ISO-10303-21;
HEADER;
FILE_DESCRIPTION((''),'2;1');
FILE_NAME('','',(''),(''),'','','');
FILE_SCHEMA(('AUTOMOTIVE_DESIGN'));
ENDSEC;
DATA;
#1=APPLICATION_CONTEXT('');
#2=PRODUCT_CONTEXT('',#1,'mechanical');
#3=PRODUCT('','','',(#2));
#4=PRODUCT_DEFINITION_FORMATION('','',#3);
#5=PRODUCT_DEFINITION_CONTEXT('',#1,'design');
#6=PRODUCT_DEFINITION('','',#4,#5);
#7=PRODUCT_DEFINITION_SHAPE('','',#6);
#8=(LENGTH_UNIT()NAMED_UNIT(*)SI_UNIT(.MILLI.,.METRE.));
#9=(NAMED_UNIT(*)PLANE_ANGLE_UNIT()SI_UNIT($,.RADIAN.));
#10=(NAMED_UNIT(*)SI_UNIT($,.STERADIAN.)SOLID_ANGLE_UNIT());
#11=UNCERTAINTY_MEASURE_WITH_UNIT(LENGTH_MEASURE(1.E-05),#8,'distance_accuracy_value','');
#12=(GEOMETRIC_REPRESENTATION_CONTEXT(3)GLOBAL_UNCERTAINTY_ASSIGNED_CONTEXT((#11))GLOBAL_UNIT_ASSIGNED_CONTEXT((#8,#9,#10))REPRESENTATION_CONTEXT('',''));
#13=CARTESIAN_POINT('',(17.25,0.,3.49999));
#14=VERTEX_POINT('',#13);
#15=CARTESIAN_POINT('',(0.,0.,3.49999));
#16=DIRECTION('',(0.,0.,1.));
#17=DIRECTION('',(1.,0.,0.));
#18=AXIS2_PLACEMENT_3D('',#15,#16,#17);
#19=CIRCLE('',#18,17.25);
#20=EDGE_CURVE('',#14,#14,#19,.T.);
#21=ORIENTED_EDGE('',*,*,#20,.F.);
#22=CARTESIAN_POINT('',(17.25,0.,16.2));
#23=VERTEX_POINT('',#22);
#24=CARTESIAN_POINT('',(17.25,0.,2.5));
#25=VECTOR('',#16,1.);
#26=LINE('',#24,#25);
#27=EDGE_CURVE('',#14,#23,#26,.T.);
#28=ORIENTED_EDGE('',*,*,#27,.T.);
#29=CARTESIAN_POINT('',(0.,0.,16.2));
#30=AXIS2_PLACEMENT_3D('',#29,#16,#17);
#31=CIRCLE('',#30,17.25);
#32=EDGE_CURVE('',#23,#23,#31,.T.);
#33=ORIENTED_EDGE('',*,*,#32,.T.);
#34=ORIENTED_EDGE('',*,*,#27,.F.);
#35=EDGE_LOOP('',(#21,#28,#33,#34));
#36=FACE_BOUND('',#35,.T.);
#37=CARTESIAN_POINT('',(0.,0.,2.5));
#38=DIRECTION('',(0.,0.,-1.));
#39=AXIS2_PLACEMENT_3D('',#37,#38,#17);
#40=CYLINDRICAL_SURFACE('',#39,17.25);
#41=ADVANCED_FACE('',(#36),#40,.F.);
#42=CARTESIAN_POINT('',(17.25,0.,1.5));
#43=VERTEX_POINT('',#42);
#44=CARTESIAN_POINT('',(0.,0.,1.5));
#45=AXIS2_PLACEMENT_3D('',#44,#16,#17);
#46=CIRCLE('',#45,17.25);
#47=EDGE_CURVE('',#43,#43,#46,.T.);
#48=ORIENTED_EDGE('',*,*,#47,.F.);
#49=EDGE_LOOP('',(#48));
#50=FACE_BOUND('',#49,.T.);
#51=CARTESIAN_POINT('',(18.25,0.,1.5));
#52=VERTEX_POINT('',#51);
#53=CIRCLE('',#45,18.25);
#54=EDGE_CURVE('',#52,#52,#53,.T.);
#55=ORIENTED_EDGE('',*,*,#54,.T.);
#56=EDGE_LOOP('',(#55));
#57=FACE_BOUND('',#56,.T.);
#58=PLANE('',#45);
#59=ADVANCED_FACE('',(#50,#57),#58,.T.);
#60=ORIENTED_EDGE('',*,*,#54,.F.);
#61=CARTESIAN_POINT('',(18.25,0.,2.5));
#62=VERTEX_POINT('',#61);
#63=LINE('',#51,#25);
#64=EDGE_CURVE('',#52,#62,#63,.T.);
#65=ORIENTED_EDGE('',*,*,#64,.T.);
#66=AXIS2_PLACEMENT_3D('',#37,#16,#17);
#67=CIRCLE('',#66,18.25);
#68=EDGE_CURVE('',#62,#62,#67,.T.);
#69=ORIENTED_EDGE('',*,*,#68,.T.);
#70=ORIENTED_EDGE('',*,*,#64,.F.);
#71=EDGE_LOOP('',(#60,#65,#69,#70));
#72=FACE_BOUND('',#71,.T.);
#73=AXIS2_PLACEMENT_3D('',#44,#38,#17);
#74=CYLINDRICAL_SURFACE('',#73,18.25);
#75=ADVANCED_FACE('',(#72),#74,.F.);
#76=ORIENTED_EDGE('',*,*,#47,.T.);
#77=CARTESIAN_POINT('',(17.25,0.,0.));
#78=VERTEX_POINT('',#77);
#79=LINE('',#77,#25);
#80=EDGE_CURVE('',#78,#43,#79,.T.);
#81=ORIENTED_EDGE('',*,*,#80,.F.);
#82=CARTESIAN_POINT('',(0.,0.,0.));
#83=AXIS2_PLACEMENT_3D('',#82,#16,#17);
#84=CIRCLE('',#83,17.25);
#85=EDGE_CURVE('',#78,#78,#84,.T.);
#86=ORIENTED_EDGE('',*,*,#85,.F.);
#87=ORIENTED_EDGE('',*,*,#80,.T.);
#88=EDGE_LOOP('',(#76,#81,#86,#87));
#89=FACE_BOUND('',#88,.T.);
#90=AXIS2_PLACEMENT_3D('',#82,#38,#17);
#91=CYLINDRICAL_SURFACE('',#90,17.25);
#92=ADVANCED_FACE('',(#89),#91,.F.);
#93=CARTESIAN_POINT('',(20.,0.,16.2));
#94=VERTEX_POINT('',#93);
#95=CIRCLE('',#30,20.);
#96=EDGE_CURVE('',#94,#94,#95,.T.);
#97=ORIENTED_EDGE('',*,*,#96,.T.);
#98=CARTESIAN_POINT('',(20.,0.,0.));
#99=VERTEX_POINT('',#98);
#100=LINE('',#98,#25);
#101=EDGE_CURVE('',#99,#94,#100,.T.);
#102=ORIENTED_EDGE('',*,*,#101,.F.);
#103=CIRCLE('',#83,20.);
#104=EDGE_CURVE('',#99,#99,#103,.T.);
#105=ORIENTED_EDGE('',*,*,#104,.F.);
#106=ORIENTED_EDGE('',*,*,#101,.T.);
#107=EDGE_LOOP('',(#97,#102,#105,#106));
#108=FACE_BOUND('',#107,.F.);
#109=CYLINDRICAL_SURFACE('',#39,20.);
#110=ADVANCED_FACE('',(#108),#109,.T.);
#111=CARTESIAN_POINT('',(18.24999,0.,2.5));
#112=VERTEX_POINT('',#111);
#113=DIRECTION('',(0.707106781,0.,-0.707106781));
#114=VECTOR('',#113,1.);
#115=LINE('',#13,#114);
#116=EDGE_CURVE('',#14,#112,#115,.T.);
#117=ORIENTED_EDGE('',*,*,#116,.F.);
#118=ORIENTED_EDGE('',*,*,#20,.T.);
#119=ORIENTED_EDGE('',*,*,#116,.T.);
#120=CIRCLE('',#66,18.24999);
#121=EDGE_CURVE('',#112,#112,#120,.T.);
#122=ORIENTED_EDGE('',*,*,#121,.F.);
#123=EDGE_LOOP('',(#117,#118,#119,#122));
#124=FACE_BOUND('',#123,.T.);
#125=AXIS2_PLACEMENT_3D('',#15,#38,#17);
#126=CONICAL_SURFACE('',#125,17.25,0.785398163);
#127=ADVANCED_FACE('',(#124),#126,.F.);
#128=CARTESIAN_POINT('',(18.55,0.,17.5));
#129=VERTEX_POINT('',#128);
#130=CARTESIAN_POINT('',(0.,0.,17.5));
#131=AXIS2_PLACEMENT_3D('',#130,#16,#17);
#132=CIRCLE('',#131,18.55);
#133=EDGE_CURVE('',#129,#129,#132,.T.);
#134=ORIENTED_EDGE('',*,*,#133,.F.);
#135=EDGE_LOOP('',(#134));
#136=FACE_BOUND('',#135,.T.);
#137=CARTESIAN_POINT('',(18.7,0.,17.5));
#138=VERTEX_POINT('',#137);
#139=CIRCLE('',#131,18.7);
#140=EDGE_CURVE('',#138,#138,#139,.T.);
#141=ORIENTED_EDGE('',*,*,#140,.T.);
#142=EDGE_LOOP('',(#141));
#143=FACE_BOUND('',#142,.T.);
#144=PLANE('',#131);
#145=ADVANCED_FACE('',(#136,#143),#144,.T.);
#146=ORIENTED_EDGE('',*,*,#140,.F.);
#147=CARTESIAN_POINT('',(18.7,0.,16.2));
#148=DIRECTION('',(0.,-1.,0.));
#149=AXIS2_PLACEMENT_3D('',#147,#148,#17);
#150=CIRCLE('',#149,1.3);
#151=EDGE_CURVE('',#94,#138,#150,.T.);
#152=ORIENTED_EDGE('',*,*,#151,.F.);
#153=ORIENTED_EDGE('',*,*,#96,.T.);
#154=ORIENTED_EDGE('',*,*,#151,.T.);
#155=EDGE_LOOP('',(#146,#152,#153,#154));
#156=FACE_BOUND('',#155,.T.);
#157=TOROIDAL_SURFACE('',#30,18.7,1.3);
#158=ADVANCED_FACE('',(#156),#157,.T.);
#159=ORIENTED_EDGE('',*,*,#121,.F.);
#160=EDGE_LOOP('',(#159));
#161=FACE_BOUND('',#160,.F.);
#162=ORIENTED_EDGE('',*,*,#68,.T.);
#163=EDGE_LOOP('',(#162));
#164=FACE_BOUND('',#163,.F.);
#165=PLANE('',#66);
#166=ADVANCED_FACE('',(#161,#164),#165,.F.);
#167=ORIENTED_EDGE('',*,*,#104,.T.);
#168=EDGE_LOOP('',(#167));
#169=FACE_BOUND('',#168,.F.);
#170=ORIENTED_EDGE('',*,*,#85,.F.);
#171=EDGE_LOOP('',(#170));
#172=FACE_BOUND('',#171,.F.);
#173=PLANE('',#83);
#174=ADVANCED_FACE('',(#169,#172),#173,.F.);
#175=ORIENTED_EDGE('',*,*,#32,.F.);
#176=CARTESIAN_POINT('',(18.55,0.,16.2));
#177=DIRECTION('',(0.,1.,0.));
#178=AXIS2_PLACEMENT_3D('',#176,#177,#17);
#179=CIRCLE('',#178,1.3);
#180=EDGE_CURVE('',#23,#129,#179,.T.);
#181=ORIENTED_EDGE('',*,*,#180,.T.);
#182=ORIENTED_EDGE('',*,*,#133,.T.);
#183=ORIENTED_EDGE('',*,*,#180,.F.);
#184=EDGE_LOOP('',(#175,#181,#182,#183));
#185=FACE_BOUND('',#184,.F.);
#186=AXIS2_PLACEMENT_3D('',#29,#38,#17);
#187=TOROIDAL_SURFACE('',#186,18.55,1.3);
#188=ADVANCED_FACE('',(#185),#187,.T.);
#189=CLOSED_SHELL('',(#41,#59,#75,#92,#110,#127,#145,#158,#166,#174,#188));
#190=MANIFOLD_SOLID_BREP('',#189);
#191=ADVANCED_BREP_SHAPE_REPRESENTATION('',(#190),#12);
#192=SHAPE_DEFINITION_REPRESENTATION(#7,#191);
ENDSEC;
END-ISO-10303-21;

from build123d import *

# Parameters (mm, degrees)
F0_R     = 20
F0_R_2   = 17.25
F1_DEPTH = 1.5
F2_R     = 20
F2_R_2   = 18.25
F3_DEPTH = 1
F4_R     = 20
F4_R_2   = 17.25
F5_DEPTH = 15
F6_R     = 1.3
F7_SIZE  = 0.99999


# Not quite as in the source:
# - a fillet or chamfer is up to 0.001 mm smaller than in the source, because OpenCascade refuses the exact size


with BuildPart() as f1:
    # F0 (on Top) → F1 (new body)
    with BuildSketch(Plane.XY):
        Circle(F0_R)
        Circle(F0_R_2, mode=Mode.SUBTRACT)
    extrude(amount=F1_DEPTH)

    # F2 (on face) → F3 (join)
    with BuildSketch(Plane.XY.offset(1.5)):
        Circle(F2_R)
        Circle(F2_R_2, mode=Mode.SUBTRACT)
    extrude(amount=F3_DEPTH)

    # F4 (on face) → F5 (join)
    with BuildSketch(Plane.XY.offset(2.5)):
        Circle(F4_R)
        Circle(F4_R_2, mode=Mode.SUBTRACT)
    extrude(amount=F5_DEPTH)

    # F6
    f6_edges = [f1.edges().sort_by_distance(p)[0] for p in [
        (-17.25, 0, 17.5),
        (-20, 0, 17.5),
    ]]
    fillet(f6_edges, radius=F6_R)

    # F7 (size 1 in the source; OpenCascade refuses exactly that, so slightly less here)
    f7_edges = [f1.edges().sort_by_distance(p)[0] for p in [
        (-17.25, 0, 2.5),
    ]]
    chamfer(f7_edges, length=F7_SIZE)


solid = f1.part
